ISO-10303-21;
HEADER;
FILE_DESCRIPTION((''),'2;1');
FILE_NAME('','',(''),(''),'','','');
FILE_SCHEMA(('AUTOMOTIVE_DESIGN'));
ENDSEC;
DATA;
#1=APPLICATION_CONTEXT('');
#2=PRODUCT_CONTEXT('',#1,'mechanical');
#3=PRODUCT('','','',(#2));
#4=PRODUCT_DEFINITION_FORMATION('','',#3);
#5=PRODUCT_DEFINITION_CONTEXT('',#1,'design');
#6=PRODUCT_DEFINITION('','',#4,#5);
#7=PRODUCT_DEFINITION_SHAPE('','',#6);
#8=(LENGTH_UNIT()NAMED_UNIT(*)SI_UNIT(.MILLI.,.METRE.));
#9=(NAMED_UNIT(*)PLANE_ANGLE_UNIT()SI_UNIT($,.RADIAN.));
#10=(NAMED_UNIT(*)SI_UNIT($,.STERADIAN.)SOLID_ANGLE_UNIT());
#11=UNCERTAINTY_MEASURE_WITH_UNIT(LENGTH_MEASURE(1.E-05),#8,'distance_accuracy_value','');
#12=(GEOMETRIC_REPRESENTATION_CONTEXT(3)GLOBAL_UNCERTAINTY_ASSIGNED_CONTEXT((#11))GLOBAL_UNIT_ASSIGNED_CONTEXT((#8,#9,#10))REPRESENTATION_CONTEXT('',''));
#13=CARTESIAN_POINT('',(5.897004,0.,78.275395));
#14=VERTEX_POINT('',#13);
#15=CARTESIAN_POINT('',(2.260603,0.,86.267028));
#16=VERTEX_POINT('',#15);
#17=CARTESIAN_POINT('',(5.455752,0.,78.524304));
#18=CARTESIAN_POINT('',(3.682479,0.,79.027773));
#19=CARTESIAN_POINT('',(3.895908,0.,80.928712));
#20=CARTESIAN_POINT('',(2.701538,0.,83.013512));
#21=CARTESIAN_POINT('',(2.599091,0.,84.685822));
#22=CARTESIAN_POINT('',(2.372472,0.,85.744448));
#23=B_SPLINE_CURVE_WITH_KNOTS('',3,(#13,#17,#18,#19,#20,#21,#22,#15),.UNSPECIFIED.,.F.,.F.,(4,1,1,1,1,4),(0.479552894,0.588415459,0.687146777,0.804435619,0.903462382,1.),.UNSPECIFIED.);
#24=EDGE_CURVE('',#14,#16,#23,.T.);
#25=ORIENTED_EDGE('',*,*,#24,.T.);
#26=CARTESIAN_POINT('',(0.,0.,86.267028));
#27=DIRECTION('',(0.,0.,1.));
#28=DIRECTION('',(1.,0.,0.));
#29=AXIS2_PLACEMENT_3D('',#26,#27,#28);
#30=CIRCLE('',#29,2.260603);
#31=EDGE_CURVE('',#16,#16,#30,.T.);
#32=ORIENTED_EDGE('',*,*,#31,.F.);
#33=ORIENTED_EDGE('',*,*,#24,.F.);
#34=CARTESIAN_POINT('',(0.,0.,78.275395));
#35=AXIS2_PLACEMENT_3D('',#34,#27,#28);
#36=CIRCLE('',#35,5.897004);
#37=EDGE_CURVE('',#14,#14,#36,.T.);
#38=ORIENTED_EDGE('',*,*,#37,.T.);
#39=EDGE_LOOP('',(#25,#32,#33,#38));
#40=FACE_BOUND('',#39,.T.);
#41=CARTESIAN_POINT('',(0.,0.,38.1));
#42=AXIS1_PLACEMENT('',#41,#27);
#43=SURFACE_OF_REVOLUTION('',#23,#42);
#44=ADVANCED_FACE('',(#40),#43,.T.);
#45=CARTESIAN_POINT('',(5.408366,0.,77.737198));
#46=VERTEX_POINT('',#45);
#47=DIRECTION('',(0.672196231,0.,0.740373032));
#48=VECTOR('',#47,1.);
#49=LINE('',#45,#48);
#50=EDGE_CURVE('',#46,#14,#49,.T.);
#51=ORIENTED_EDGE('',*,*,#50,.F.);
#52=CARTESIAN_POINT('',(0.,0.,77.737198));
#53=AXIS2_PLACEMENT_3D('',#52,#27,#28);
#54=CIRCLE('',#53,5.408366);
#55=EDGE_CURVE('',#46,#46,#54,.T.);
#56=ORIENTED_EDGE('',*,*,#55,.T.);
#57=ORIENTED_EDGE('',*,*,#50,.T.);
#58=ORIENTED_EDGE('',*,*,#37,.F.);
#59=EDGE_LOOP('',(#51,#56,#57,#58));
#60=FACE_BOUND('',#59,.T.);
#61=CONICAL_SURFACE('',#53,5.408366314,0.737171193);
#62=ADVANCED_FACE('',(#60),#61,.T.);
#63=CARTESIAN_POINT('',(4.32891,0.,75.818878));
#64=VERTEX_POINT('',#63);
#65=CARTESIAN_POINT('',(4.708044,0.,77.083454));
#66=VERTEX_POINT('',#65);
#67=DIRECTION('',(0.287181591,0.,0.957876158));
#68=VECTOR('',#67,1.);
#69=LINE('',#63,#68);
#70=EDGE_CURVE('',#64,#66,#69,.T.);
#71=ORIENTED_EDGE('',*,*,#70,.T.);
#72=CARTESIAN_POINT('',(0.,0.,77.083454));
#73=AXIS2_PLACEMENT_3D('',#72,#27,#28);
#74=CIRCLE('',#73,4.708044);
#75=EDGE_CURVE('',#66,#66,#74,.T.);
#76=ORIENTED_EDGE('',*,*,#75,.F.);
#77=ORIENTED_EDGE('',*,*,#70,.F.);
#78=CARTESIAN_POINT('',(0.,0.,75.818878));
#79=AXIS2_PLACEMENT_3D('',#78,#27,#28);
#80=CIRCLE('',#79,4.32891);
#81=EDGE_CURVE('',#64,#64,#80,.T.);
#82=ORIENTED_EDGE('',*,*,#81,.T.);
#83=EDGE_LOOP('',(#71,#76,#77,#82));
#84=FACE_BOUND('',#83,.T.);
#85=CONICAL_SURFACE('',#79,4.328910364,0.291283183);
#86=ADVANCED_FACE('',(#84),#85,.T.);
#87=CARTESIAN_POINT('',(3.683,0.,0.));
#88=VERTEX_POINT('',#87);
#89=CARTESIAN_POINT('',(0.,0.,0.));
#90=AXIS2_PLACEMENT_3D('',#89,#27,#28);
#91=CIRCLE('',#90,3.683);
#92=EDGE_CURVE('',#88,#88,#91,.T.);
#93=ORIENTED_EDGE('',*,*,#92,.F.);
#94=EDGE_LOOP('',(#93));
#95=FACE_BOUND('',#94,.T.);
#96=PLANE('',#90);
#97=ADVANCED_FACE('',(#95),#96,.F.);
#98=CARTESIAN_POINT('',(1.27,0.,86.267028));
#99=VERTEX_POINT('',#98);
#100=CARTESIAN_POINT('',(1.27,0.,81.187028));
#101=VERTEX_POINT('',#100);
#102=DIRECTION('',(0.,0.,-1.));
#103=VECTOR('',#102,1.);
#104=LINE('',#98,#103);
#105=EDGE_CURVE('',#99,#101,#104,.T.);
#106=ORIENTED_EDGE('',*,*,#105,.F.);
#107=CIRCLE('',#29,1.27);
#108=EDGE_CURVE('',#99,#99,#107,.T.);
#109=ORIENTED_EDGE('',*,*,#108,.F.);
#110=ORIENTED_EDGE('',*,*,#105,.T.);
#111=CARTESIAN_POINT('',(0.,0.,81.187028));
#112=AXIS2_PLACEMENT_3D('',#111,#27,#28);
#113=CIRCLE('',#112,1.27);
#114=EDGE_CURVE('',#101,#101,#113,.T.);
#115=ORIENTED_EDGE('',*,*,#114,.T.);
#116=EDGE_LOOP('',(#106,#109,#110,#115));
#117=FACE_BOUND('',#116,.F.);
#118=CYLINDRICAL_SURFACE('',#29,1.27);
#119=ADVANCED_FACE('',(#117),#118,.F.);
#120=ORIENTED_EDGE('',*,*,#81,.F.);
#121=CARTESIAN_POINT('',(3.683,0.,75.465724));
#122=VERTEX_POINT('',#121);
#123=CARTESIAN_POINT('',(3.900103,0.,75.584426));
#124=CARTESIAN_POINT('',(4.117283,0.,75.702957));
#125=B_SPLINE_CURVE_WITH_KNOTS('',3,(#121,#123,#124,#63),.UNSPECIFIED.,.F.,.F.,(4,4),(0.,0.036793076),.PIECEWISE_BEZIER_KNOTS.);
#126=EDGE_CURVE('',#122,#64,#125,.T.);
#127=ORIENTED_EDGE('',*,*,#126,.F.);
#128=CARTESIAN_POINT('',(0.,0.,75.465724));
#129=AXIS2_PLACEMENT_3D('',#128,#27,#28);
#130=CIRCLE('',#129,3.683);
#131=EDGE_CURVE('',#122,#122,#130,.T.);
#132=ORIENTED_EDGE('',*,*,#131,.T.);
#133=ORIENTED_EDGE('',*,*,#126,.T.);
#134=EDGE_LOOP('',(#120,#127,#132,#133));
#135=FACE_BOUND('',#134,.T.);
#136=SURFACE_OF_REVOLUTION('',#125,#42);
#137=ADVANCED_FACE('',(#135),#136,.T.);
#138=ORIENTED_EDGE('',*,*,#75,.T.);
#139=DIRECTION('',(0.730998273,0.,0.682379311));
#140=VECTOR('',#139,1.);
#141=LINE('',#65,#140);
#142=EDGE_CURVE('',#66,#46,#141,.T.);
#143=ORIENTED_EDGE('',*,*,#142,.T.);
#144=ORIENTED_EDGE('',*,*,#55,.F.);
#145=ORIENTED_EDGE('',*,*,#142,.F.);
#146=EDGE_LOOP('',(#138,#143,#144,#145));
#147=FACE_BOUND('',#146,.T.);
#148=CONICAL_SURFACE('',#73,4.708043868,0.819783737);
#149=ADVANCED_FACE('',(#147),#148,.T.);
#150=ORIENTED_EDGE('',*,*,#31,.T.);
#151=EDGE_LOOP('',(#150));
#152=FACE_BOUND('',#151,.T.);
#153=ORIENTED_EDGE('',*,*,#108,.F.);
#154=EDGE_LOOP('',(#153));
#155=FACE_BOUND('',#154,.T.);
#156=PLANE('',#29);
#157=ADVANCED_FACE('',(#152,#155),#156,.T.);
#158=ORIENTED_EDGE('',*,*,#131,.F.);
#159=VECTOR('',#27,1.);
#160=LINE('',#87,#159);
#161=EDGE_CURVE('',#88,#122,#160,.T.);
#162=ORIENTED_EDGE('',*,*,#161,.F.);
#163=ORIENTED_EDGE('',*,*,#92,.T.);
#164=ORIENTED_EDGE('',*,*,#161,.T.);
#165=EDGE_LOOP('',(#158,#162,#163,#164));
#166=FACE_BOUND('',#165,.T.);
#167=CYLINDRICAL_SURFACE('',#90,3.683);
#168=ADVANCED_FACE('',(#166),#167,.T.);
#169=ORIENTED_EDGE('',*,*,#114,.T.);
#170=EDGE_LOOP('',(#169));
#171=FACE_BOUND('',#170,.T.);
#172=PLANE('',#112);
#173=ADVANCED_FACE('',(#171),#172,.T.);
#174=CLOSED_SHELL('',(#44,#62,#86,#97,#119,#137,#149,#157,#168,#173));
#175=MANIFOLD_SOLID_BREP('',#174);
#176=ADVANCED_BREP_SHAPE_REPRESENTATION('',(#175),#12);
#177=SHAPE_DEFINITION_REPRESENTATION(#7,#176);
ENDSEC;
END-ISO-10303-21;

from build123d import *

# Parameters (mm, degrees)
F2_R     = 1.27
F3_DEPTH = 5.08


# Not quite as in the source:
# - a feature names something its author has since deleted; it is built from what else it names


with BuildPart() as f1:
    # F0 (on Front) → F1 (revolve)
    with BuildSketch(Plane.XZ):
        with BuildLine():
            Line((0, 76.2), (0, 0))
            Line((0, 0), (3.683, 0))
            Line((3.683, 0), (3.683, 50.5892820656))
            Line((3.683, 50.5892820656), (3.683, 75.4657239321))
            add(Edge.make_bspline(
                [(3.683, 75.4657239321), (3.9001026563, 75.5844257372), (4.117282526, 75.702956664), (4.3289103642, 75.8188781839)],
                knots=[0, 0, 0, 0, 0.0367930761, 0.0367930761, 0.0367930761, 0.0367930761], degree=3))
            Line((4.3289103642, 75.8188781839), (4.7080438681, 77.083454169))
            Line((4.7080438681, 77.083454169), (5.4083663136, 77.7371979129))
            Line((5.4083663136, 77.7371979129), (5.8970035864, 78.2753947108))
            add(Edge.make_bspline(
                [(5.8970035864, 78.2753947108), (5.4557518487, 78.5243036944), (3.6824791799, 79.0277734306), (3.8959075155, 80.928711884), (2.7015379677, 83.0135115397), (2.599091359, 84.685822435), (2.3724716532, 85.744447935), (2.2606033154, 86.2670275395)],
                knots=[0.4795528936, 0.4795528936, 0.4795528936, 0.4795528936, 0.5884154591, 0.6871467774, 0.8044356188, 0.9034623818, 1, 1, 1, 1], degree=3))
            Line((2.2606033154, 86.2670275395), (0, 86.2670275395))
            Line((0, 86.2670275395), (0, 85.744447935))
            Line((0, 85.744447935), (0, 76.2))
        make_face()
    revolve(axis=Axis((0, 0, 38.1), (0, 0, 1)))

    # F2 (on face) → F3 (cut)
    with BuildSketch(Plane.XY.offset(86.2670275395)):
        Circle(F2_R)
    extrude(amount=-F3_DEPTH, mode=Mode.SUBTRACT)


solid = f1.part
